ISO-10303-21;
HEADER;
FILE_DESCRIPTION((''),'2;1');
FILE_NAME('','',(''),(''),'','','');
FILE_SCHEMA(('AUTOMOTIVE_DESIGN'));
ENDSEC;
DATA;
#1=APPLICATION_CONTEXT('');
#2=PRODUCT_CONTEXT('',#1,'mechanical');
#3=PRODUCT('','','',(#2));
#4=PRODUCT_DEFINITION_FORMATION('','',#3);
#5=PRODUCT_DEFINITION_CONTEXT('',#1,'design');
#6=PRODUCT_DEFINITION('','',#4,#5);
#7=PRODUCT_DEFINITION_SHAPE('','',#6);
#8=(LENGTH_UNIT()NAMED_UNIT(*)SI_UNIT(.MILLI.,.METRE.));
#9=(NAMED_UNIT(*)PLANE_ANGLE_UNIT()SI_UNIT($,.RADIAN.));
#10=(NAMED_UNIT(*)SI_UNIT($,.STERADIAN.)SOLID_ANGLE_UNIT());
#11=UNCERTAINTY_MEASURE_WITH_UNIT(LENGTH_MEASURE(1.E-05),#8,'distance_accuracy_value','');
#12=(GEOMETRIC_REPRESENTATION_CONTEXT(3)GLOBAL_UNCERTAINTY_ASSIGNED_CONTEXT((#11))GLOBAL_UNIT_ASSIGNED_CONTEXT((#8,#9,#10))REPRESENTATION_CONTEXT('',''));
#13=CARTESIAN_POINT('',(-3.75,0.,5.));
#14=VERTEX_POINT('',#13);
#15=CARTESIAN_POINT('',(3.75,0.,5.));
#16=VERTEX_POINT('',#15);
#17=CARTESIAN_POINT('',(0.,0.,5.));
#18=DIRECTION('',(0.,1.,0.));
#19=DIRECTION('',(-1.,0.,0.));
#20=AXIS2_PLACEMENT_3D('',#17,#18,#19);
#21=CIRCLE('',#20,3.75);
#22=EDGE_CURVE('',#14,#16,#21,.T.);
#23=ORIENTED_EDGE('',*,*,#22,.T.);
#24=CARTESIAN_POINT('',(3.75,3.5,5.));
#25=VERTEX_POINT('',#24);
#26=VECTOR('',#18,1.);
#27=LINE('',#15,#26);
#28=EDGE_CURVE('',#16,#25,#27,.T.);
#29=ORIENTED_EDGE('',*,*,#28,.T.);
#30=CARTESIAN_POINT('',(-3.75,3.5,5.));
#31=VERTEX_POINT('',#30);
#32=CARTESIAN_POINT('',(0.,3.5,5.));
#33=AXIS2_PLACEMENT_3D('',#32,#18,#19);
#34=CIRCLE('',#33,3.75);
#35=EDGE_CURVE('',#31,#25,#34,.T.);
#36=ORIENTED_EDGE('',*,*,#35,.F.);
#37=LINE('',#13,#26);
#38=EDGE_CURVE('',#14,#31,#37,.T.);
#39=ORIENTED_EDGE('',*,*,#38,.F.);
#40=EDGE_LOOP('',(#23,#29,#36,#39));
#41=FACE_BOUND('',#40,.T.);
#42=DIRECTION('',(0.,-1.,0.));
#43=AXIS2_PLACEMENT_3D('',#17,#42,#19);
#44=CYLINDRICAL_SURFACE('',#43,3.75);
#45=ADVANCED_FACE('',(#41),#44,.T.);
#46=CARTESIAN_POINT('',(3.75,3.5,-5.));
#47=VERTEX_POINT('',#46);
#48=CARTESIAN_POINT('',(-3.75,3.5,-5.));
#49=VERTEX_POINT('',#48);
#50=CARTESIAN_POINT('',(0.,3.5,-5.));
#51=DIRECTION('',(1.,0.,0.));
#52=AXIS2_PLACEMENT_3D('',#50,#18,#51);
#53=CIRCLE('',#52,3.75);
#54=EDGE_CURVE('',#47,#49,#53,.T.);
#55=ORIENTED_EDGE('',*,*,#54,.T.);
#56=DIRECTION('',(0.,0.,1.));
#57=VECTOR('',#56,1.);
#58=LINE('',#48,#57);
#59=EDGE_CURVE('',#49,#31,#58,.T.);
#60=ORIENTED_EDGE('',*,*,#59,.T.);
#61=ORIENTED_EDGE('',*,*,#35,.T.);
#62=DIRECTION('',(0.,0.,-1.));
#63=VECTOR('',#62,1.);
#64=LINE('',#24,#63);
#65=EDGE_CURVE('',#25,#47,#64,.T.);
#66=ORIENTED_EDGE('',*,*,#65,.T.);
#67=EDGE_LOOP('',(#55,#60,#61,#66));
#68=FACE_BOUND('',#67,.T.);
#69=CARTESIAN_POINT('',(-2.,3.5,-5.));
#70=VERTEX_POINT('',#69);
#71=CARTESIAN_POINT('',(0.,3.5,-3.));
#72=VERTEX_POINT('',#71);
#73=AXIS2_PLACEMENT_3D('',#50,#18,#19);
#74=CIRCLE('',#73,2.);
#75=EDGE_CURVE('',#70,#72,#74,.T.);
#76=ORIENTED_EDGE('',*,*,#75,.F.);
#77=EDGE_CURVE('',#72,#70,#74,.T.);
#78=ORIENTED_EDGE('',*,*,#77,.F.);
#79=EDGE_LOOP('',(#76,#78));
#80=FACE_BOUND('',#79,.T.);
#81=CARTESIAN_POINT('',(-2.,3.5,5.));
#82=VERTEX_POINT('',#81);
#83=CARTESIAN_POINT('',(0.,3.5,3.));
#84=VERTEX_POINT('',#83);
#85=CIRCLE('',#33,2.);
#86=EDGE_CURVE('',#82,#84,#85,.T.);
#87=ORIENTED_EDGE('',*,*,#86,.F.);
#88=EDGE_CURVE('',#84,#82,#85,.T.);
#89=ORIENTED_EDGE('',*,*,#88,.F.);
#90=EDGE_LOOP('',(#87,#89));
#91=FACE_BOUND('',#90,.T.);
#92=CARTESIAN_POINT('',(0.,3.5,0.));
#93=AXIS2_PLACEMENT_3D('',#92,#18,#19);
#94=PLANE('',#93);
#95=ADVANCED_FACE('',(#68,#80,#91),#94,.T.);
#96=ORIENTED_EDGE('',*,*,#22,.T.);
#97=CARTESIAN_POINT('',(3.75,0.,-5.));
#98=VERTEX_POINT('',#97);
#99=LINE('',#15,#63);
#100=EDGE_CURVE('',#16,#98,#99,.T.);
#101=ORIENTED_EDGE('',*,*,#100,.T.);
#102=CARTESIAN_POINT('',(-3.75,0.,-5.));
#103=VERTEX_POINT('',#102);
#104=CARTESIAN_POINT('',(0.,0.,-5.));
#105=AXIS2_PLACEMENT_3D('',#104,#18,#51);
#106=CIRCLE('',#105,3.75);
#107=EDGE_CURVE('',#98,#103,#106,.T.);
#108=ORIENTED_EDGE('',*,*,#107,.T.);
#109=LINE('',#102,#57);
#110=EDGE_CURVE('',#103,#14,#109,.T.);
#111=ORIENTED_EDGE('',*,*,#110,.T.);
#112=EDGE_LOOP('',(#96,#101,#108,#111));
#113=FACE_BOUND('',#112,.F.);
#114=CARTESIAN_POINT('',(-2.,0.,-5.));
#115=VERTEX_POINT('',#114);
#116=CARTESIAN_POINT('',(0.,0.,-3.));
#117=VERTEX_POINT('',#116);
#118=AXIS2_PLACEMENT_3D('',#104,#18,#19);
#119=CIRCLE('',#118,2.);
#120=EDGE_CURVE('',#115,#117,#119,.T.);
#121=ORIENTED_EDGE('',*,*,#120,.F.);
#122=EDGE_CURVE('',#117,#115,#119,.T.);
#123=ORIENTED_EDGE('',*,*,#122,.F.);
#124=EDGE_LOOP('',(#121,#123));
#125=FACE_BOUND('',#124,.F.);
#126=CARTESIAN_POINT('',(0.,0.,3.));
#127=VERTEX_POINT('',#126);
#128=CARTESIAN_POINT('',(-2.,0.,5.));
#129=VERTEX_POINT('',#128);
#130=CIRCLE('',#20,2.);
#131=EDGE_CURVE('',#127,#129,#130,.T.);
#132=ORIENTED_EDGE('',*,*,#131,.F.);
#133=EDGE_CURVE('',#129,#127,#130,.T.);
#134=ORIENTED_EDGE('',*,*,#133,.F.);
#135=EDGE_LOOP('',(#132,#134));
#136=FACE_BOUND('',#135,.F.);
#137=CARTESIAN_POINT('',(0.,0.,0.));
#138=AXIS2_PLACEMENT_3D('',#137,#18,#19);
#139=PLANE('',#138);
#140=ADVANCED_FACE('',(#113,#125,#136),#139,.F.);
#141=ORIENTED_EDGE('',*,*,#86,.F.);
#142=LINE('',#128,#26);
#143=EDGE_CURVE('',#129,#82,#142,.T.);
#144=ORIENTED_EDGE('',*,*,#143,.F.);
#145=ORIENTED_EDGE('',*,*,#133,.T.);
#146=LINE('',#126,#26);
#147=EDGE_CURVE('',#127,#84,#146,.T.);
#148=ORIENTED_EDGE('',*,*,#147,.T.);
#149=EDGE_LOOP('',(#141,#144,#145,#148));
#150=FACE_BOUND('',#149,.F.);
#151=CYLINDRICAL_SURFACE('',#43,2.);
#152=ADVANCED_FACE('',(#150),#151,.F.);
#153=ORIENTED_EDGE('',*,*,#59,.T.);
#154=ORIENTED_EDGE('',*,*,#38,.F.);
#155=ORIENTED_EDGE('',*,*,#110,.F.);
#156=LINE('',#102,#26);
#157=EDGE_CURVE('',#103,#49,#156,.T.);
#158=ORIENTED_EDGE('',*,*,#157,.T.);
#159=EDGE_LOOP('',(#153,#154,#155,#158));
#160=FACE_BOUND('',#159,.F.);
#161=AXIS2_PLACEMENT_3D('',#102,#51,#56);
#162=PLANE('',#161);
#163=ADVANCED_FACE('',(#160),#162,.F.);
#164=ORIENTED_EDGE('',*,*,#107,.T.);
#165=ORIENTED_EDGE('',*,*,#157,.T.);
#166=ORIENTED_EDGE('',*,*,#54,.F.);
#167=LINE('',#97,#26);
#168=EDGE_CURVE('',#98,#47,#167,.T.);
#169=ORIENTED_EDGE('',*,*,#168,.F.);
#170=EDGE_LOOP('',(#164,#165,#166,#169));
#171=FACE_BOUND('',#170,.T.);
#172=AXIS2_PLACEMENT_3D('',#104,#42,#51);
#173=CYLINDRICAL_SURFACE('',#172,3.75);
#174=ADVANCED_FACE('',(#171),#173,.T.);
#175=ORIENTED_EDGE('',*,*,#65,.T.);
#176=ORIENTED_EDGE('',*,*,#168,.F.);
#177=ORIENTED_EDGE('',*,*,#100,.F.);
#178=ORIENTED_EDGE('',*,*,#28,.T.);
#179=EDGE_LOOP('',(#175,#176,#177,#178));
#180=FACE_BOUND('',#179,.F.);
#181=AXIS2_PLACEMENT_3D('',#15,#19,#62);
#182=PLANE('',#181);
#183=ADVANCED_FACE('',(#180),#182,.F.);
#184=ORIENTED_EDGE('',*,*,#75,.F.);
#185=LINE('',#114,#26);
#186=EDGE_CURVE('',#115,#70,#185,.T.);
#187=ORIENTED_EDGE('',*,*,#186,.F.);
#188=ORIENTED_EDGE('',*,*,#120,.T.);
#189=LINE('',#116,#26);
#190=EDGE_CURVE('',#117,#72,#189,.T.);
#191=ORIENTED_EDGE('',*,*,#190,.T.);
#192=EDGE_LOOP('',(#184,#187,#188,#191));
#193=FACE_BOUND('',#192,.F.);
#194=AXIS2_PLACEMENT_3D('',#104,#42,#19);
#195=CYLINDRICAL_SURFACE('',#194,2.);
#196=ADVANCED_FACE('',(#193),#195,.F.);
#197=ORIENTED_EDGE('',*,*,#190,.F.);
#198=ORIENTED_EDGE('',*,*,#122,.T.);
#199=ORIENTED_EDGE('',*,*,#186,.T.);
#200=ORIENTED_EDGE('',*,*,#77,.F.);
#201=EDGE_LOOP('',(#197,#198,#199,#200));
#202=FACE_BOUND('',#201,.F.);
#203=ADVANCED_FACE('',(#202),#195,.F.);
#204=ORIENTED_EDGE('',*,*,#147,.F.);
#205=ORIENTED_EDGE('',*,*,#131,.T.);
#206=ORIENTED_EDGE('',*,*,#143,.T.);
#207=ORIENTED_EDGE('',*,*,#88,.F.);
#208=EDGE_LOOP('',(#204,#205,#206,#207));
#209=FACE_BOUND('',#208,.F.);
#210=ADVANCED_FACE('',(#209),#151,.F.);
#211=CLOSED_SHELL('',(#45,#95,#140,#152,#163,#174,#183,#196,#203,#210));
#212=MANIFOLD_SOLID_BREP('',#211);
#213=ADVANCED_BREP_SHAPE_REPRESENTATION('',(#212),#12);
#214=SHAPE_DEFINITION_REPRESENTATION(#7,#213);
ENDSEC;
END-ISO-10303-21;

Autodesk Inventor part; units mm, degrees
ref_plane "YZ Plane" through (0, 0, 0) normal (1, 0, 0) x (0, 1, 0)
ref_plane "XZ Plane" through (0, 0, 0) normal (0, 1, 0) x (-1, 0, 0)
ref_plane "XY Plane" through (0, 0, 0) normal (0, 0, 1) x (1, 0, 0)
sketch "Sketch1" plane through (0, 0, 0) normal (0, 1, 0) x (-1, 0, 0)
  line L0 (0, 5) -> (0, -5)
  circle A0 centre (0, 5) radius 2
  circle A1 centre (0, -5) radius 2
  line L1 (0, 5) -> (0, -5) construction
  line L2 (-3.75, 5) -> (-3.75, -5)
  line L3 (3.75, -5) -> (3.75, 5)
  arc A2 (3.75, 5) -> (-3.75, 5) centre (0, 5) ccw
  arc A3 (-3.75, -5) -> (3.75, -5) centre (0, -5) ccw
  point P0 (0, 0)
  point P1 (0, 0)
  dimension "d0" = 10
  dimension "d1" = 4
  dimension "d2" = 4
  dimension "d3" = 7.5
extrude "Extrusion1" add sketch "Sketch1" along normal blind 3.5
properties part number "piulita"
